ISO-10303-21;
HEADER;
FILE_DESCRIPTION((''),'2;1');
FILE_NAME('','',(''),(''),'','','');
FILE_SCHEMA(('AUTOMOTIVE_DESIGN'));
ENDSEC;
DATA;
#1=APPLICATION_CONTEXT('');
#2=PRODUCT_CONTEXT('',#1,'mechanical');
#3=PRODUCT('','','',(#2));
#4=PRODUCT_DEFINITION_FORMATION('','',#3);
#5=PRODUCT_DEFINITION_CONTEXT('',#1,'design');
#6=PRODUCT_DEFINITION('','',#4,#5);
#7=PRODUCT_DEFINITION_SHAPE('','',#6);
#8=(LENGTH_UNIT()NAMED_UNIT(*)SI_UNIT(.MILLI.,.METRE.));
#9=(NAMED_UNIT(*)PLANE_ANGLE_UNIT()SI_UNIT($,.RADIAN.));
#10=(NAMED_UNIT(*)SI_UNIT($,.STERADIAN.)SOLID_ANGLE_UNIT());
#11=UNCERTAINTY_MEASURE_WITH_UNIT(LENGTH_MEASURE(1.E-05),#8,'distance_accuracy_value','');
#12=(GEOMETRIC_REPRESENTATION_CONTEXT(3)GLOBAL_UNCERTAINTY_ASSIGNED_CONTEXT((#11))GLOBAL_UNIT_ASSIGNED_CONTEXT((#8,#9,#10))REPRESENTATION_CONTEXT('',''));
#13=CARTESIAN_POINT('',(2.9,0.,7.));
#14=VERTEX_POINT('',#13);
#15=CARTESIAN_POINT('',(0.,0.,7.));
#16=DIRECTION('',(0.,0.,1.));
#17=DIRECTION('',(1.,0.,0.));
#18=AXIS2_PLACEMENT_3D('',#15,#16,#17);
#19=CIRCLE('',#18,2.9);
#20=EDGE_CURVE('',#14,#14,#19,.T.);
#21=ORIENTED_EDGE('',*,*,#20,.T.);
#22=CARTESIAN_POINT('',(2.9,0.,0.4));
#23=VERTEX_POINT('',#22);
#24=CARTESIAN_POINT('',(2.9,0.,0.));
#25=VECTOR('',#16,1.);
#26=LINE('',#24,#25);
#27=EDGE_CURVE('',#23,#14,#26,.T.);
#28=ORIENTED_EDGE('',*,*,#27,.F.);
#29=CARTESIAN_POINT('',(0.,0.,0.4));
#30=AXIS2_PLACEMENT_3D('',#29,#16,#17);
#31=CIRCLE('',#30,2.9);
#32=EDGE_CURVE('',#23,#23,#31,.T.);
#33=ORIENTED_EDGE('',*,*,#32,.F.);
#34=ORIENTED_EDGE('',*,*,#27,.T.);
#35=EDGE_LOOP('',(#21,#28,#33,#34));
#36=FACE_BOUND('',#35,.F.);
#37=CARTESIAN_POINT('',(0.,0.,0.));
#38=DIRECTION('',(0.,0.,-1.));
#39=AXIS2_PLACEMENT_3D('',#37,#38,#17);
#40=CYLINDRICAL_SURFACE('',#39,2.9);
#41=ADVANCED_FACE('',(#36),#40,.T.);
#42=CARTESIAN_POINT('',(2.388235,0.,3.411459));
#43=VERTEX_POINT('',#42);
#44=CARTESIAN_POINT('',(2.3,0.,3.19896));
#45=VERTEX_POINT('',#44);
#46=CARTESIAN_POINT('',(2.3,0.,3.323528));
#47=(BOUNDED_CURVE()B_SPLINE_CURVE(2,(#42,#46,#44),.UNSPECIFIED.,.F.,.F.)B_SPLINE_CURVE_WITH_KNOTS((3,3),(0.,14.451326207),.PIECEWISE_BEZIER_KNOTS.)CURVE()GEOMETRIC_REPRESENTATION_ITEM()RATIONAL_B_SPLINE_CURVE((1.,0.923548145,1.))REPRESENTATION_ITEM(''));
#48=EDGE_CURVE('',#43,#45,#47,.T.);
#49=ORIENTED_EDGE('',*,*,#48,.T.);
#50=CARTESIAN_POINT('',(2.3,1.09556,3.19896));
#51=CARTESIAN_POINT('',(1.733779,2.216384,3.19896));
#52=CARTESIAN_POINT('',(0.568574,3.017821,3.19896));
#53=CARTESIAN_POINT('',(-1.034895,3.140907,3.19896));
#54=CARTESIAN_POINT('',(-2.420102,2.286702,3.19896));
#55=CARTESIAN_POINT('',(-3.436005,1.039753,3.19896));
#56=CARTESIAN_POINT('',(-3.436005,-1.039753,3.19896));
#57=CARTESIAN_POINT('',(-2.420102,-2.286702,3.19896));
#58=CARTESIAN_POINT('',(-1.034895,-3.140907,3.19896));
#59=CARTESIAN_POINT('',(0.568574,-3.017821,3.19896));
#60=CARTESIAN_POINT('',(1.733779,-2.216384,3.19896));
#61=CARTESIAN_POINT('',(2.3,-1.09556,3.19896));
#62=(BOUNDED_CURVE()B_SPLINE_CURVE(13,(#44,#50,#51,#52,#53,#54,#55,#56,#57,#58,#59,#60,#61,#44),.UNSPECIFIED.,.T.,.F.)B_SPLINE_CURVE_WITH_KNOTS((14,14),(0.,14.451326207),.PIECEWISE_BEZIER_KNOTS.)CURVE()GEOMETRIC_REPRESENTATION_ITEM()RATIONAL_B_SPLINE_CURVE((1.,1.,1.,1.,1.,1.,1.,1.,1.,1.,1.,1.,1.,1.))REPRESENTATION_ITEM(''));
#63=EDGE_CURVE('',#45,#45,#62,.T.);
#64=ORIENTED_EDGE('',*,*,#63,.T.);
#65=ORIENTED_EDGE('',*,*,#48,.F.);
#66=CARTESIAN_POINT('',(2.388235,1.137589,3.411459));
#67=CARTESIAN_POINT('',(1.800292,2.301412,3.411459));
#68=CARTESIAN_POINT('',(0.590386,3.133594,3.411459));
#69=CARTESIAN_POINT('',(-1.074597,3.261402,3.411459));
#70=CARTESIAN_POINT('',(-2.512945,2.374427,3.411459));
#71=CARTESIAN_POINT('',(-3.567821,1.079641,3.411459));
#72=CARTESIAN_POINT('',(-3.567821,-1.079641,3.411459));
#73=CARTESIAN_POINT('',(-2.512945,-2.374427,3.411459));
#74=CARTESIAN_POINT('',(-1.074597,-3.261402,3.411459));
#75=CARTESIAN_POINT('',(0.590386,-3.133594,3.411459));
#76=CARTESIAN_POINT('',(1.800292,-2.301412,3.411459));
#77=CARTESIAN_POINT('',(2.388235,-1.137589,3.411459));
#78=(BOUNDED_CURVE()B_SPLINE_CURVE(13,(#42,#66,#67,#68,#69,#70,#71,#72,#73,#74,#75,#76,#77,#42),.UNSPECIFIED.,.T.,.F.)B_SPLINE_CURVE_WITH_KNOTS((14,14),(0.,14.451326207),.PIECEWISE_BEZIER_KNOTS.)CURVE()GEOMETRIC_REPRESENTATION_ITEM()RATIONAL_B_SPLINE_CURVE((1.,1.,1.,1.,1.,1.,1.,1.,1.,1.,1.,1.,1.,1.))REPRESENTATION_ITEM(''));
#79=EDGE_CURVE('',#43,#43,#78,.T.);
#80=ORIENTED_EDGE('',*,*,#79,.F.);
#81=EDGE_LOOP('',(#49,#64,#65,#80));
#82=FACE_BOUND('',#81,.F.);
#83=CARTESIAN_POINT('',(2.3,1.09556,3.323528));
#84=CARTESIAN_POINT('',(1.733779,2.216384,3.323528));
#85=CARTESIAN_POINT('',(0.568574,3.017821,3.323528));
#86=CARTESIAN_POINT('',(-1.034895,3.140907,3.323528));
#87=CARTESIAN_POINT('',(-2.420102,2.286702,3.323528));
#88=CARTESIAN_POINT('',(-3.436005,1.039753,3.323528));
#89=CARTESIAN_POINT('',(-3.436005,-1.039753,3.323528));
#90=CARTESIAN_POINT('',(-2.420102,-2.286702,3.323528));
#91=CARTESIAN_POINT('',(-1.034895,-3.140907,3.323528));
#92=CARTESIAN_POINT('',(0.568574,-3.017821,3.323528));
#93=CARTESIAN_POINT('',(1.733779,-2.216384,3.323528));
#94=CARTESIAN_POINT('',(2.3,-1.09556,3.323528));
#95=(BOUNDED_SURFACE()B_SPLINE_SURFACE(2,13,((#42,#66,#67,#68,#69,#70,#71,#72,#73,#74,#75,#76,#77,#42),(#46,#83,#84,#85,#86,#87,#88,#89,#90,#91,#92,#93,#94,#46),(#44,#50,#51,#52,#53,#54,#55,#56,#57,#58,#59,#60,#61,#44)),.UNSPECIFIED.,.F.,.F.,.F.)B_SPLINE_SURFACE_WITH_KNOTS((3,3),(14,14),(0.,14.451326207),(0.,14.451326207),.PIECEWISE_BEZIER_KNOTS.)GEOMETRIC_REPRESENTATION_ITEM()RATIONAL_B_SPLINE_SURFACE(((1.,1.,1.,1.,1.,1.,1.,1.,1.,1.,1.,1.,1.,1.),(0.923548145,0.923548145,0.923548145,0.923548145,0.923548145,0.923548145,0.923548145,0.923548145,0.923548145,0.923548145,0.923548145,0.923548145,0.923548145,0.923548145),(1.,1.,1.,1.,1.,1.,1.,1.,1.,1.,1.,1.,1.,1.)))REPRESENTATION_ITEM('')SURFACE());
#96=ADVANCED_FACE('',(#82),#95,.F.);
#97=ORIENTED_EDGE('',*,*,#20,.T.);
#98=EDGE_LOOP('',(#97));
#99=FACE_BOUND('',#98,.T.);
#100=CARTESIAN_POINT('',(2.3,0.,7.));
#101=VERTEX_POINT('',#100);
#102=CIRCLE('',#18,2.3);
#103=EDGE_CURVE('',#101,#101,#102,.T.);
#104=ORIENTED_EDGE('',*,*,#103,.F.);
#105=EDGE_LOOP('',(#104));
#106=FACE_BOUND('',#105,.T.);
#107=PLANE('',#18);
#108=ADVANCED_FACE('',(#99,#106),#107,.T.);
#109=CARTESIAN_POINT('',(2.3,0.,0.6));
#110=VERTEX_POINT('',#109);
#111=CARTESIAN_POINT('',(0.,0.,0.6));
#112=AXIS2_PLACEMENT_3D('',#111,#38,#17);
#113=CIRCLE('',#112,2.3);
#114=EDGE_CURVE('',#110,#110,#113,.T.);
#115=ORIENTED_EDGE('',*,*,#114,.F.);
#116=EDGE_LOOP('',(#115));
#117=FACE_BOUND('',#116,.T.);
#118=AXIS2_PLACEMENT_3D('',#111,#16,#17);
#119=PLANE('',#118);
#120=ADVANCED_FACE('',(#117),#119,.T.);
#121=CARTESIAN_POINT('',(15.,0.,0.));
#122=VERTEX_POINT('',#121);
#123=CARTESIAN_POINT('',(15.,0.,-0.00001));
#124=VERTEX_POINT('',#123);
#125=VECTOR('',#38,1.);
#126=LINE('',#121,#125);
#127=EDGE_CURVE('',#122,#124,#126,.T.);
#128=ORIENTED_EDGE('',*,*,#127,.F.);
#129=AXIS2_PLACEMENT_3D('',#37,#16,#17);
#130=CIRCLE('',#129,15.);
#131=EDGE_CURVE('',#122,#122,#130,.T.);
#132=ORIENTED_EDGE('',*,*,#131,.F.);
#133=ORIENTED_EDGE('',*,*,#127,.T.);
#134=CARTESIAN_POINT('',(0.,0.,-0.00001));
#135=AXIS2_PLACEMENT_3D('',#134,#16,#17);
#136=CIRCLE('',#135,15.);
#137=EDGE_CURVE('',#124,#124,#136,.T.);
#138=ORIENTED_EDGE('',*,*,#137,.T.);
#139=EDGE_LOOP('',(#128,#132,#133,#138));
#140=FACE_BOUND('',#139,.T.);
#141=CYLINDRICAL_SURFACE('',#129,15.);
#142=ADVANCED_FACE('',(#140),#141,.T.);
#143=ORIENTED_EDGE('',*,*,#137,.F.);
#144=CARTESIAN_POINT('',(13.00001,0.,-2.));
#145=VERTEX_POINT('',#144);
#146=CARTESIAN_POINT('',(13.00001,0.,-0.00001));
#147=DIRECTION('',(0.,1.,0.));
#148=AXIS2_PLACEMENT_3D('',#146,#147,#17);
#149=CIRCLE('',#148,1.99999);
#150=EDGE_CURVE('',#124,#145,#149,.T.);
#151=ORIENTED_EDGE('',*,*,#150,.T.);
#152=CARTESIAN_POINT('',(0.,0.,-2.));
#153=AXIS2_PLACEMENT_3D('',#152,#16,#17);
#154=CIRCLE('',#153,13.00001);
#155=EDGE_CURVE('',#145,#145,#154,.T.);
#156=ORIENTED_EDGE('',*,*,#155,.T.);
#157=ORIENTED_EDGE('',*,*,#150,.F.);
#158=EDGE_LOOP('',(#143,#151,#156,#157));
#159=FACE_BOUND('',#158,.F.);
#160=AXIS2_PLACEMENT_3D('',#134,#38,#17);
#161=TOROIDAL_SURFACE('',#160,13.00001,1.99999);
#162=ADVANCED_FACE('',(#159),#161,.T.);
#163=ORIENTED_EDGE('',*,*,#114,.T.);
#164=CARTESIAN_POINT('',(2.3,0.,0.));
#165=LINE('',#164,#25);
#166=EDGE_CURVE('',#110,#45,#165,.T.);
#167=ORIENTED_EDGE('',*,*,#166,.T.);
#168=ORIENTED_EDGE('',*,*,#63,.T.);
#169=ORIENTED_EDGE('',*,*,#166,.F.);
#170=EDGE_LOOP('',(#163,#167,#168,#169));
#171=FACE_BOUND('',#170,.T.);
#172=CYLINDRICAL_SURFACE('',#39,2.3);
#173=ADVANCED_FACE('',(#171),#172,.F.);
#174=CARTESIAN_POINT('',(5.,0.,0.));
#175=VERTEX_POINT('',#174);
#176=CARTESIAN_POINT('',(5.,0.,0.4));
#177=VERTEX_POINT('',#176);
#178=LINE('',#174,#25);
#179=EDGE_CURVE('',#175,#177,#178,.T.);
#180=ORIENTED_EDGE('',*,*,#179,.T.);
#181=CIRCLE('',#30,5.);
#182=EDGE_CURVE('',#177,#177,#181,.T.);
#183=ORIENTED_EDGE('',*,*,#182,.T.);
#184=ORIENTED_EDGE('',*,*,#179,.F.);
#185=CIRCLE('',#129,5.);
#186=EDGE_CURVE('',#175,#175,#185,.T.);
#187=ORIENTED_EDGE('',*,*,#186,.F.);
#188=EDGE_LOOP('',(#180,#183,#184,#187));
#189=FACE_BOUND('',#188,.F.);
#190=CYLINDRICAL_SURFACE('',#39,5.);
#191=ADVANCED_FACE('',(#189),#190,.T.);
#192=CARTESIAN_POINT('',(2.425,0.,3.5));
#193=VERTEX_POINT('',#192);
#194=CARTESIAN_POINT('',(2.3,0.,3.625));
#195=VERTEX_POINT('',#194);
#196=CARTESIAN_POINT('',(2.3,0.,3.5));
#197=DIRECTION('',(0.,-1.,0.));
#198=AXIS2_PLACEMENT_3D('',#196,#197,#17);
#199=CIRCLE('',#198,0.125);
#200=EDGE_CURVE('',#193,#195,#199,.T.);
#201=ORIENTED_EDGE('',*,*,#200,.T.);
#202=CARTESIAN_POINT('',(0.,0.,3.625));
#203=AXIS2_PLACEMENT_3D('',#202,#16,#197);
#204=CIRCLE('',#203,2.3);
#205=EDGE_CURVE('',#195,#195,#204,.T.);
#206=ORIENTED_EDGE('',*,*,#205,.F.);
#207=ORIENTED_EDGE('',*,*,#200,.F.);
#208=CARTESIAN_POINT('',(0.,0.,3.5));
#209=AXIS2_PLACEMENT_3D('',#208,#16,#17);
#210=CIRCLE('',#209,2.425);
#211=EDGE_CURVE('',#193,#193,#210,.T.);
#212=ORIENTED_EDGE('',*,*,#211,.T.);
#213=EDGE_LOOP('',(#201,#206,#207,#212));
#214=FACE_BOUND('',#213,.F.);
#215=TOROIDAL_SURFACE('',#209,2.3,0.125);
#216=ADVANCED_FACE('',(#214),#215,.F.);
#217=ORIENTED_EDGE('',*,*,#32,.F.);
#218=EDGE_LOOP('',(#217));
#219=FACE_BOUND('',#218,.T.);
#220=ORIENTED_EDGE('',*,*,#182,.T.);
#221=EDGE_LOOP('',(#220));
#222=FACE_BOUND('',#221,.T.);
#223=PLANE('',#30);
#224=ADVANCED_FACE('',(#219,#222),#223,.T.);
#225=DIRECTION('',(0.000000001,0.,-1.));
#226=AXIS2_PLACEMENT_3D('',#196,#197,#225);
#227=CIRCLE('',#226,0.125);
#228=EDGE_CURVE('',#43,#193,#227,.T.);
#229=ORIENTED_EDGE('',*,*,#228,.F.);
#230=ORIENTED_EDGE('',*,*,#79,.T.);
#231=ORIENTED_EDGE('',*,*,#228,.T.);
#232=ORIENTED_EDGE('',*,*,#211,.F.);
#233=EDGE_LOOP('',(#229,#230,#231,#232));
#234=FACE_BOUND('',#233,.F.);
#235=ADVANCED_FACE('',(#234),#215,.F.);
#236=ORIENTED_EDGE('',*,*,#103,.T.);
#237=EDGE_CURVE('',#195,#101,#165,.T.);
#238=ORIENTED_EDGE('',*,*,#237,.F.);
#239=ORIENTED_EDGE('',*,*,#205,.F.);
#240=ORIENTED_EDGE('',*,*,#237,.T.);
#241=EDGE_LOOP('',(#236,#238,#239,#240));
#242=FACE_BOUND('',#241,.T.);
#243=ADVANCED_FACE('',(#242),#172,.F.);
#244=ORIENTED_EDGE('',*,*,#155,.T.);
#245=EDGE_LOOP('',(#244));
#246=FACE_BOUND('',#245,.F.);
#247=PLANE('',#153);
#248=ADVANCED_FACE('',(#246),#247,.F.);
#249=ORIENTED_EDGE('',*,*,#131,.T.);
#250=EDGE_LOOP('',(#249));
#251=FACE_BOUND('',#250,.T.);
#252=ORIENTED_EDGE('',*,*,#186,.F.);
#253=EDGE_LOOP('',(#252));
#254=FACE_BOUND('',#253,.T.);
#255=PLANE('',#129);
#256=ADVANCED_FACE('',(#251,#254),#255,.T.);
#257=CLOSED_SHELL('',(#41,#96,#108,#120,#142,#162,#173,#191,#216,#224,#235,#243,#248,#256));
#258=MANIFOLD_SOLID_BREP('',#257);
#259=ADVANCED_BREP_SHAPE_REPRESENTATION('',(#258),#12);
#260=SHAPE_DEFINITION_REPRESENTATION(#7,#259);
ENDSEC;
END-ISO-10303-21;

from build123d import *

# Parameters (mm, degrees)
F0_R     = 2.9
F1_DEPTH = 7
F2_T     = -0.6
F0_R_2   = 15
F0_R_3   = 5
F3_DEPTH = 2
F4_R     = 1.99999
F7_R     = 0.3
F8_DEPTH = 0.4


# Not quite as in the source:
# - a fillet or chamfer is up to 0.001 mm smaller than in the source, because OpenCascade refuses the exact size


with BuildPart() as f1:
    # F0 (on Top) → F1 (new body)
    with BuildSketch(Plane.XY):
        Circle(F0_R)
    extrude(amount=F1_DEPTH)

    # F2
    f2_openings = [f1.faces().sort_by_distance(p)[0] for p in [
        (0, 0, 7),
    ]]
    offset(amount=F2_T, openings=f2_openings)

    # F0 (on Top) → F3 (join)
    with BuildSketch(Plane.XY):
        Circle(F0_R_2)
        Circle(F0_R_3, mode=Mode.SUBTRACT)
        Circle(F0_R_3)
        Circle(F0_R, mode=Mode.SUBTRACT)
        Circle(F0_R)
    extrude(amount=-F3_DEPTH)

    # F4 (radius 2 in the source; OpenCascade refuses exactly that, so slightly less here)
    f4_edges = [f1.edges().sort_by_distance(p)[0] for p in [
        (-15, 0, -2),
    ]]
    fillet(f4_edges, radius=F4_R)

    # F5 (on Front) → F6 (revolve, cut)
    with BuildSketch(Plane.XZ):
        with BuildLine():
            ThreePointArc((2.175, 3.5), (2.2116116524, 3.4116116524), (2.3, 3.375))
            Line((2.3, 3.375), (2.3, 3.5))
            Line((2.3, 3.5), (2.175, 3.5))
        make_face()
        with BuildLine():
            Line((2.3, 3.5), (2.3, 3.375))
            ThreePointArc((2.3, 3.375), (2.3883883476, 3.4116116524), (2.425, 3.5))
            ThreePointArc((2.425, 3.5), (2.3, 3.625), (2.175, 3.5))
            Line((2.175, 3.5), (2.3, 3.5))
        make_face()
    revolve(axis=Axis((0, 0, 1.75), (0, 0, 1)), mode=Mode.SUBTRACT)

    # F7
    f7_edges = [f1.edges().sort_by_distance(p)[0] for p in [
        (-2.3, 0, 3.375),
    ]]
    fillet(f7_edges, radius=F7_R)

    # F0 (on Top) → F8 (join)
    with BuildSketch(Plane.XY):
        Circle(F0_R_3)
        Circle(F0_R, mode=Mode.SUBTRACT)
    extrude(amount=F8_DEPTH)


solid = f1.part
